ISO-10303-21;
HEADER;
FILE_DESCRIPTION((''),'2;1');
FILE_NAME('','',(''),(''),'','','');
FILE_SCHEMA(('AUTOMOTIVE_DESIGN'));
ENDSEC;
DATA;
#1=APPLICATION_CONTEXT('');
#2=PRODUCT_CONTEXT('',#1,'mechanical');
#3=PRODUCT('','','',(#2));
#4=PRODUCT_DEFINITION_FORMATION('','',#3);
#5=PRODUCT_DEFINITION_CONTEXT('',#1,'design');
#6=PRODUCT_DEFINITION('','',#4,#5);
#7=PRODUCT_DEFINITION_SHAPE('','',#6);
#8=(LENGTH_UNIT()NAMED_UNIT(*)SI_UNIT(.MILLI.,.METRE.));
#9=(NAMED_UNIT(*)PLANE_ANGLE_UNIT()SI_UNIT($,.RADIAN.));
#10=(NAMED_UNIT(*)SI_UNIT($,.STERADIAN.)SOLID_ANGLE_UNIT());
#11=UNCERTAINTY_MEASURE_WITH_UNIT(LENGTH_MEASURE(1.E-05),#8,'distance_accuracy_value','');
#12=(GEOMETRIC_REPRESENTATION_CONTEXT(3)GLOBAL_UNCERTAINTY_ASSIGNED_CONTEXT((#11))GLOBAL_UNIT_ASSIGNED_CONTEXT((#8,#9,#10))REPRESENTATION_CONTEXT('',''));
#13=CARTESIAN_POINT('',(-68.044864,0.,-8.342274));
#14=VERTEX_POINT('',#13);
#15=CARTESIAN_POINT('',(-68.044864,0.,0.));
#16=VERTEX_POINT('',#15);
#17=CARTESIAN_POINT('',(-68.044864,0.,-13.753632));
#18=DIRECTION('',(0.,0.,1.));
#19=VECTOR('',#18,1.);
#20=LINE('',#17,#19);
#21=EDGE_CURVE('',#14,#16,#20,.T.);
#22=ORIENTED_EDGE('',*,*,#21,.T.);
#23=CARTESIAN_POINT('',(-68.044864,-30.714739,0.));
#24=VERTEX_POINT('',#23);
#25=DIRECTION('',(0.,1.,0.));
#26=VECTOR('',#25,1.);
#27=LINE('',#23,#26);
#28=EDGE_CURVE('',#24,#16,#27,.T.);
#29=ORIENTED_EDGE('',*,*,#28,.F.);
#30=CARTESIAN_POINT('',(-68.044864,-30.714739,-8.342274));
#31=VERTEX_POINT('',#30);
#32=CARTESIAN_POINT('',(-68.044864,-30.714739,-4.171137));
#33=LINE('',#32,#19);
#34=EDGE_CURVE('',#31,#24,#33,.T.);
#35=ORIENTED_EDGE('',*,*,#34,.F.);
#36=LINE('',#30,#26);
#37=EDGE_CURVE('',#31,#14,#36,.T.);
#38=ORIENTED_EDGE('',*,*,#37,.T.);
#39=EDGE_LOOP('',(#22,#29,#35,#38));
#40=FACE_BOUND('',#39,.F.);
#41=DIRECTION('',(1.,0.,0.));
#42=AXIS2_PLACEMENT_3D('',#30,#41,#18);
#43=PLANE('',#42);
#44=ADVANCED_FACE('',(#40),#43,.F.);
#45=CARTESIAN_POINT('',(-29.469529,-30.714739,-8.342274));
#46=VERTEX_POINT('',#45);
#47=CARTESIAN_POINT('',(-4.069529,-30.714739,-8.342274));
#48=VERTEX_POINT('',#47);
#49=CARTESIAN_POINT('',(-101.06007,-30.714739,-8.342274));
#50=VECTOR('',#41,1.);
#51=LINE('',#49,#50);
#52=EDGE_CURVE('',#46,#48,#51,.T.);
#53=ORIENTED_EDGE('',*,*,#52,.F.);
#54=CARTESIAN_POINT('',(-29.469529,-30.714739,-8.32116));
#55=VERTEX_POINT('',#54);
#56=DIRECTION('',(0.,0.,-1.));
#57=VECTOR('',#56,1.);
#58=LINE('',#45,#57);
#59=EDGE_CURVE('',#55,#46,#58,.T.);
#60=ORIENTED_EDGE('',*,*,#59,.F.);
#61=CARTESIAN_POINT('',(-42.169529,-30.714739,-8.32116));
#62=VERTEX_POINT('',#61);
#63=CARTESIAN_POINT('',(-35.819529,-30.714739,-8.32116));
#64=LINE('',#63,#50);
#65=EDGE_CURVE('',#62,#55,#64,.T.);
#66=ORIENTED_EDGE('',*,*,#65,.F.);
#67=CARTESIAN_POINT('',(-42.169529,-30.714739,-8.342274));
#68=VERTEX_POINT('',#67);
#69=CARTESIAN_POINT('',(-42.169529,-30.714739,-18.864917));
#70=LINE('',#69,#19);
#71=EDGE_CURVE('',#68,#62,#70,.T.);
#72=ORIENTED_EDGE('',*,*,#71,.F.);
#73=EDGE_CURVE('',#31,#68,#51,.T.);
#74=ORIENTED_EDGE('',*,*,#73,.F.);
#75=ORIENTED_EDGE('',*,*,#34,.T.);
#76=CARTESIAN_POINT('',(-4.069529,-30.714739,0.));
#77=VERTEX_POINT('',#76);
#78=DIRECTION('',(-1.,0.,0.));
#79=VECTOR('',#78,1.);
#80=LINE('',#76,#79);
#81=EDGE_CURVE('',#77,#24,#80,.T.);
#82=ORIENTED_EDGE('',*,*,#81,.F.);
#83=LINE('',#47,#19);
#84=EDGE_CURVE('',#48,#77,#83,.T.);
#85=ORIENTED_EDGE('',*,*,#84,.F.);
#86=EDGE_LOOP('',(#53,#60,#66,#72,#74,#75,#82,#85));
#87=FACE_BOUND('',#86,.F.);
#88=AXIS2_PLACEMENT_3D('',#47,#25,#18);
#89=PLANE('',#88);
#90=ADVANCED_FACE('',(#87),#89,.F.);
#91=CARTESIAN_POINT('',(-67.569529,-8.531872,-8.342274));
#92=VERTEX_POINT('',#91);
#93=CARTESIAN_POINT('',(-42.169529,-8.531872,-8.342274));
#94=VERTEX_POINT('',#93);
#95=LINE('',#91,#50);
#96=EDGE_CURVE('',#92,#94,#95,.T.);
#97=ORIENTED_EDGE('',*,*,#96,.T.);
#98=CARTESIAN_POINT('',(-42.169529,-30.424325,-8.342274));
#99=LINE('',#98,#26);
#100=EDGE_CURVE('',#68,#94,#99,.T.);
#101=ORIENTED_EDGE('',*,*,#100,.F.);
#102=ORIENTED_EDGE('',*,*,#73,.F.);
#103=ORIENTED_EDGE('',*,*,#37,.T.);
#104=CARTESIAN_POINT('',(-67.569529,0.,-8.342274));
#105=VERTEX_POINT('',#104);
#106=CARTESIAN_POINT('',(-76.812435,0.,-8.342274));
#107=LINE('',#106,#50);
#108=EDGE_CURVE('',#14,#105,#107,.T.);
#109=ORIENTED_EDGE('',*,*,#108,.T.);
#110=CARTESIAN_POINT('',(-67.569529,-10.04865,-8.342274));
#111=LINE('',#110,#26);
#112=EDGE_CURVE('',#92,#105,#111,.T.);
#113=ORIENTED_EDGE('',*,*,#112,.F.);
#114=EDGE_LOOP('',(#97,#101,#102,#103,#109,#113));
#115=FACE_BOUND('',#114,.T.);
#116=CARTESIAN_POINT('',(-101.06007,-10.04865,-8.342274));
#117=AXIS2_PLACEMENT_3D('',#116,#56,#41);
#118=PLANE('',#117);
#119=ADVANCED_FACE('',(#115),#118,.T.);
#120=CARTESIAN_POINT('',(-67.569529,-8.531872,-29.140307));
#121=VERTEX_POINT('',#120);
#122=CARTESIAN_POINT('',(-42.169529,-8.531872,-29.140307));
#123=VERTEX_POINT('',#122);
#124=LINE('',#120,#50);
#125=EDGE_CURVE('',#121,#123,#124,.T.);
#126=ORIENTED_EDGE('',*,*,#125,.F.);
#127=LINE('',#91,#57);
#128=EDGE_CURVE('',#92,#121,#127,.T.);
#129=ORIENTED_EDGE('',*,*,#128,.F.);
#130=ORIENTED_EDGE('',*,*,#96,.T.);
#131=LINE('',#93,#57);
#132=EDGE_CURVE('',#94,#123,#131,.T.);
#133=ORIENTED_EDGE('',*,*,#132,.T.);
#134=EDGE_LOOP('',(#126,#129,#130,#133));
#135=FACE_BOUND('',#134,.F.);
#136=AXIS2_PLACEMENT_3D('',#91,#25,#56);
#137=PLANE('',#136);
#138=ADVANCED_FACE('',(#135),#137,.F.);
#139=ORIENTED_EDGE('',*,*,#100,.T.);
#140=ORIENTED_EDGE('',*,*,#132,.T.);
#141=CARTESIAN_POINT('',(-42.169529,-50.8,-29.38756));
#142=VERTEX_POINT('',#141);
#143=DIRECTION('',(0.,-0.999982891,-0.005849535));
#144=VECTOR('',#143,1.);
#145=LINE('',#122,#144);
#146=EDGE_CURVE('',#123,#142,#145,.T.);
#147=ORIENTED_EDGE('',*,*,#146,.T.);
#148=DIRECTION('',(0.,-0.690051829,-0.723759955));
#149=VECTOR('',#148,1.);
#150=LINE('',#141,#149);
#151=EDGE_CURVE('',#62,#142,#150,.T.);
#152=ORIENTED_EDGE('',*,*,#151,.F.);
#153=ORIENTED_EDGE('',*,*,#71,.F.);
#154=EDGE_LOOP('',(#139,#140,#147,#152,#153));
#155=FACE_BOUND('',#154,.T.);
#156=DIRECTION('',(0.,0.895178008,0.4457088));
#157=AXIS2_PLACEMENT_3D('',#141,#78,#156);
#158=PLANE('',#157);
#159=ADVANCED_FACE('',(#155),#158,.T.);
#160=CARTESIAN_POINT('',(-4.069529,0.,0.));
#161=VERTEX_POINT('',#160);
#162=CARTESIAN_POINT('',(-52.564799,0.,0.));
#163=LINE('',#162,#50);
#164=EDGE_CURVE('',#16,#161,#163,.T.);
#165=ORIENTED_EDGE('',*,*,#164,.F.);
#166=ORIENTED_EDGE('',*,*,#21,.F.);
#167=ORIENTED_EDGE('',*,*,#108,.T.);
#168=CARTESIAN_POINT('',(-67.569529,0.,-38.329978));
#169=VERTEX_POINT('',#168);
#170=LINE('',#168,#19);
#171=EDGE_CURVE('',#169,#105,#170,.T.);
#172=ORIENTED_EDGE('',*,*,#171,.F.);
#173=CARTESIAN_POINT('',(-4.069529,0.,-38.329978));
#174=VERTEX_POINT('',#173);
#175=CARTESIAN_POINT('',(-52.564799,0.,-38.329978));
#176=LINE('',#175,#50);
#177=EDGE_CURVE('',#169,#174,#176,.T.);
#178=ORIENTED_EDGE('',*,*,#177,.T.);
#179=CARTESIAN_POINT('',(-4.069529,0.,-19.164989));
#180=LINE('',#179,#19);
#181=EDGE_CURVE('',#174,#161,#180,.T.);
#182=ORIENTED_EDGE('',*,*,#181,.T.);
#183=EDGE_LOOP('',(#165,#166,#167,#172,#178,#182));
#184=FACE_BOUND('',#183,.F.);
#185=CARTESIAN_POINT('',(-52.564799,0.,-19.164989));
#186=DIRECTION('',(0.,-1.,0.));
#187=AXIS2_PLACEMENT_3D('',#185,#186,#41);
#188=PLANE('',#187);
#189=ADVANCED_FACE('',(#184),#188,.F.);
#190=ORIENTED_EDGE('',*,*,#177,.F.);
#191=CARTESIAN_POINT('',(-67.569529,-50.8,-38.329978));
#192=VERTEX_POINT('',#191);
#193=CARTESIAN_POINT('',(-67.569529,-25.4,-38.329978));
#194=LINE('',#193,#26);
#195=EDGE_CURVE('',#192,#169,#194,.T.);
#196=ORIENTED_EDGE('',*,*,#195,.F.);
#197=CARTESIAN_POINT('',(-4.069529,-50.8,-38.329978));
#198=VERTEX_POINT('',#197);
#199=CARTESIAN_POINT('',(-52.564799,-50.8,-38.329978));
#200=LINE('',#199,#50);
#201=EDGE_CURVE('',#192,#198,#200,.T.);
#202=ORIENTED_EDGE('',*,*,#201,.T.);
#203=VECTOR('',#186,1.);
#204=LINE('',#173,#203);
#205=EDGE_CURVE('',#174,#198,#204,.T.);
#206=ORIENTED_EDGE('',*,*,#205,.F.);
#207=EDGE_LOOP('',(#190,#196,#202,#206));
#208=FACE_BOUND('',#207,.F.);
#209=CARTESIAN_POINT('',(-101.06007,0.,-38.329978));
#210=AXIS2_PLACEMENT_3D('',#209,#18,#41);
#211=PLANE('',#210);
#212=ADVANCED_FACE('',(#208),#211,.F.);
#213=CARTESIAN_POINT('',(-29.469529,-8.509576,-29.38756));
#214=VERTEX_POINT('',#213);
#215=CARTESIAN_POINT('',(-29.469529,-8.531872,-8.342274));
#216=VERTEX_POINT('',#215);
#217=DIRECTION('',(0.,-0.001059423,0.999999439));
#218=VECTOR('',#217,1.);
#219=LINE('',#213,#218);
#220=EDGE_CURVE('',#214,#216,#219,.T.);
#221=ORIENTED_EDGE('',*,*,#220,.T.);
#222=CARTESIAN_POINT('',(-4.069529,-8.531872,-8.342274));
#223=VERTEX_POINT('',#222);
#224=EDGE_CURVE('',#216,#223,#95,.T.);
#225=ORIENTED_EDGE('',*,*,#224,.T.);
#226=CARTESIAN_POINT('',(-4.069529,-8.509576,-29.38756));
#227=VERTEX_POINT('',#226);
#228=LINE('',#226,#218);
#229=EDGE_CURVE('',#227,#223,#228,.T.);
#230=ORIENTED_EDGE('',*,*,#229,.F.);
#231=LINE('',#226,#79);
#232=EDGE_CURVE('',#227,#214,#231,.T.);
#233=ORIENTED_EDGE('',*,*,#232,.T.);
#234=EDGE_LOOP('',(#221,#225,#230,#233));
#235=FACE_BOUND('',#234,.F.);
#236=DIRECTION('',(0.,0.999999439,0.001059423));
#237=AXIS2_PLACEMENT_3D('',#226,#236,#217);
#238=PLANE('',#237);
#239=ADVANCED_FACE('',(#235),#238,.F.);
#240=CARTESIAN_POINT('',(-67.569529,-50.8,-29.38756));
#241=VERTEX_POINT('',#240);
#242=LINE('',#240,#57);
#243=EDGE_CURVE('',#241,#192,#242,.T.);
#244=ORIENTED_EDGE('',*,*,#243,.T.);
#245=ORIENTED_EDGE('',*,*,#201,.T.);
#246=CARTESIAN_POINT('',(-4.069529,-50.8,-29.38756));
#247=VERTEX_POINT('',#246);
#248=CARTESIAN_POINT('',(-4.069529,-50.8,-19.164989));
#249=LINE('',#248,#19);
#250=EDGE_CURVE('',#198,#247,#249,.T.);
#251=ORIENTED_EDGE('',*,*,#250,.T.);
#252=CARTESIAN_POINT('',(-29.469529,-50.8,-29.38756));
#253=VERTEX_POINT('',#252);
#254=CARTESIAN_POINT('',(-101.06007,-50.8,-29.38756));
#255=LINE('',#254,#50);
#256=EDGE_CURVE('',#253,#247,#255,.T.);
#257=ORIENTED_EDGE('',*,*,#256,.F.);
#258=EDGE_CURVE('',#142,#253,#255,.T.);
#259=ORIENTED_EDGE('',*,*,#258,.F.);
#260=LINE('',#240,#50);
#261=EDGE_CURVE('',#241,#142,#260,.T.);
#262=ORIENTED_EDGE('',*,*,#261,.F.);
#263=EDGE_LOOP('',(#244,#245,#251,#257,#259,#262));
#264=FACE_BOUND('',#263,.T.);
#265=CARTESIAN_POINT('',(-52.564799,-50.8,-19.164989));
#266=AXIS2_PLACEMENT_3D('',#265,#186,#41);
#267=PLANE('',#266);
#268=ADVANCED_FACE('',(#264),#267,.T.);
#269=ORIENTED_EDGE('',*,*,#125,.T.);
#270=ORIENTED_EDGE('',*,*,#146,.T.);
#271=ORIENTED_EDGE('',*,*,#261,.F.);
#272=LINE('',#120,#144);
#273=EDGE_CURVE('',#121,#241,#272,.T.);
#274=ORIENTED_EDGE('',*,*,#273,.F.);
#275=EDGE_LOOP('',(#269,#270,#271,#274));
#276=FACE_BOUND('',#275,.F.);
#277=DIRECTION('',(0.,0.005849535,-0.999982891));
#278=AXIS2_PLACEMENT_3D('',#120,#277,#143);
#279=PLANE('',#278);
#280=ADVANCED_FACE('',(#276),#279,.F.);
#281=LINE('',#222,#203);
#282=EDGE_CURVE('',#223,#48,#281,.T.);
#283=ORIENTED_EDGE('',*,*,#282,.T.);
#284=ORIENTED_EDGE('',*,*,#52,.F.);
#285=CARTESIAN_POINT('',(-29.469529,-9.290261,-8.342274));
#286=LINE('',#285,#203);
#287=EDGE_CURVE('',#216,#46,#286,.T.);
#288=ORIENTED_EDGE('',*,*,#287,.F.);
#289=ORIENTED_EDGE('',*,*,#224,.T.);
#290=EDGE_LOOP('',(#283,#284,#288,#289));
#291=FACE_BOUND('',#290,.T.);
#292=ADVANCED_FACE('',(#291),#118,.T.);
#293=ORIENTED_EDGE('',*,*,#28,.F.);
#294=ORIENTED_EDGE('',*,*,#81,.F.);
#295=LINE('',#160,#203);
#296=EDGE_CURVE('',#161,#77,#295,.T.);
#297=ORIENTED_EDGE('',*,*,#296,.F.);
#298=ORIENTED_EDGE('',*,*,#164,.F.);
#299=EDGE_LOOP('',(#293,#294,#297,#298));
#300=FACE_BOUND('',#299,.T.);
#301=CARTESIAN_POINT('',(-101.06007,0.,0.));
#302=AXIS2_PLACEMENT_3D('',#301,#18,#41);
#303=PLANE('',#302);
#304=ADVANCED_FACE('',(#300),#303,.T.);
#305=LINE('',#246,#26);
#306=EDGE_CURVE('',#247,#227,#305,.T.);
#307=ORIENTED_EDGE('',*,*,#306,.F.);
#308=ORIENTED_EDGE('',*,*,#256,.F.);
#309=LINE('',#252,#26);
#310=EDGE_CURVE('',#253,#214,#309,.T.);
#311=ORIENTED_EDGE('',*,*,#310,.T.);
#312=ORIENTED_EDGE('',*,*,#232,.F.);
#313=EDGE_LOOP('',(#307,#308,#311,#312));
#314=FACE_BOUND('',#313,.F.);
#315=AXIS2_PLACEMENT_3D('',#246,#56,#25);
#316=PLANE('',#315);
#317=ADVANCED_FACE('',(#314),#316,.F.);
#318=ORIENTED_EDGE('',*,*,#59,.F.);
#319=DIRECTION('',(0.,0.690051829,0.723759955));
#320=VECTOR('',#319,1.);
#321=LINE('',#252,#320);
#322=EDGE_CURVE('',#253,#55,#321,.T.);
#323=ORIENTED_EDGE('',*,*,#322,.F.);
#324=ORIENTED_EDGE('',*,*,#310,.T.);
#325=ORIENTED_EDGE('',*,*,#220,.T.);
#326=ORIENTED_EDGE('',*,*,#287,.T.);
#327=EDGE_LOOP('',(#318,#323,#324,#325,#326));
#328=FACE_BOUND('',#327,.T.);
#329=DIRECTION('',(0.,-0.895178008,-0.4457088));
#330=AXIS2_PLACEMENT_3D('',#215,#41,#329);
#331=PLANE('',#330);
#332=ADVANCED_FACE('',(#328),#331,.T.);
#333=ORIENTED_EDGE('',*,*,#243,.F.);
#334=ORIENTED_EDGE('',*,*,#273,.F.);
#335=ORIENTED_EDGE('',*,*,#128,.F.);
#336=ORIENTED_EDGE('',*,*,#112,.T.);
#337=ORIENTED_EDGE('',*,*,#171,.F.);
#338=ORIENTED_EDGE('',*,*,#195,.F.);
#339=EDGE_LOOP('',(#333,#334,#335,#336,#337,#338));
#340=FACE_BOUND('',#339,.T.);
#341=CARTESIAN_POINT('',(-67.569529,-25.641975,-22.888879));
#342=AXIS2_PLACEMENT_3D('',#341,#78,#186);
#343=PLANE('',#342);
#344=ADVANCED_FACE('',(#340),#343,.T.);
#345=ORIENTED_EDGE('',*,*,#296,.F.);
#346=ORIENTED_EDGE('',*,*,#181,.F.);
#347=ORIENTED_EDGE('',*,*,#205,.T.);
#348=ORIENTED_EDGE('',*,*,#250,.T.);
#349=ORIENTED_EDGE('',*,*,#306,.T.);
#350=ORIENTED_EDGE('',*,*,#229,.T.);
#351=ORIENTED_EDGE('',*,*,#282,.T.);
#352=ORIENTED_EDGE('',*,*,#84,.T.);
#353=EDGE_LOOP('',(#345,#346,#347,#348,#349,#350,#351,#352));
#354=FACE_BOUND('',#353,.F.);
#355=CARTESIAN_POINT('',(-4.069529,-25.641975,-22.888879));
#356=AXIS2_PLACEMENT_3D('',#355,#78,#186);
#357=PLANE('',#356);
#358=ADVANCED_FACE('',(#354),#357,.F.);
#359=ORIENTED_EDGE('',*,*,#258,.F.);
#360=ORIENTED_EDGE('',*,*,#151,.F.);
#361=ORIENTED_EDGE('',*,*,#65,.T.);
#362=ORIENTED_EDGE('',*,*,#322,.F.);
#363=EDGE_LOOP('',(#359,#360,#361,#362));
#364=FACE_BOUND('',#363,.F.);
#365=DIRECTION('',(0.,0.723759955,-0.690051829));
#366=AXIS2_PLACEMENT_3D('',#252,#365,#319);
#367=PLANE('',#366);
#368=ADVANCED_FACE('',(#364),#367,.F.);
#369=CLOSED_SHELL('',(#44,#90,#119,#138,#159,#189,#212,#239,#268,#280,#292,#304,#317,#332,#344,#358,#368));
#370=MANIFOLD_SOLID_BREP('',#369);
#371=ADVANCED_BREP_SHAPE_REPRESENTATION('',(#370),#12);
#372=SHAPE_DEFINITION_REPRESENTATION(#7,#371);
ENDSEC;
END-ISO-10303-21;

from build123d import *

# Parameters (mm, degrees)
F0_W      = 96.990541555
F0_H      = 38.3299775422
F1_DEPTH  = 50.8
F3_DEPTH  = 101.6
F5_DEPTH  = 25.4
F7_DEPTH  = 38.1
F8_DEPTH  = 38.1
F9_W      = 33.0152064562
F9_H      = 8.3422744647
F10_DEPTH = 47.752
F11_DEPTH = 25.4
F13_DEPTH = 25.4
F15_DEPTH = 63.5
F17_DEPTH = 25.4
F19_DEPTH = 25.4
F20_DEPTH = 9.906
F22_DEPTH = 25.4


# Not quite as in the source:
# - a feature of the source that left no trace in its solid (it failed there, or was rolled back) is left out


with BuildPart() as f1:
    # F0 (on Front) → F1 (new body)
    with BuildSketch(Plane.XZ):
        with Locations((-52.56479932, -19.1649887711)):
            Rectangle(F0_W, F0_H)
    extrude(amount=F1_DEPTH)

    # F2 (on face) → F3 (cut)
    with BuildSketch(Plane.YZ.offset(-4.0695285425)):
        Polygon((-50.8, 0), (-50.8, -29.3875597417), (-30.714739114, -8.3422744647), (-30.714739114, 0), align=None)
    extrude(amount=-F3_DEPTH, mode=Mode.SUBTRACT)

    # F4 (on face) → F5 (cut)
    with BuildSketch(Plane.YZ.offset(-4.0695285425)):
        Polygon((-8.5318721831, -8.3422744647), (-30.714739114, -8.3422744647), (-50.8, -29.3875597417), (-8.5318721831, -29.3875597417), align=None)
    extrude(amount=-F5_DEPTH, mode=Mode.SUBTRACT)

    # F6 (on face) → F7 (cut)
    with BuildSketch(Plane(origin=(-101.0600700974, 0, 0), x_dir=(0, -1, 0), z_dir=(-1, 0, 0))):
        Polygon((50.8, -29.3875597417), (30.714739114, -8.3422744647), (10.0486502051, -8.3422744647), (10.0486502051, -29.3875597417), align=None)
    extrude(amount=-F7_DEPTH, mode=Mode.SUBTRACT)

    # F8 (cut): a face of the model
    f8_faces = [f1.faces().sort_by_distance(p)[0] for p in [
        (-29.4695285425, -25.1662286777, -19.9579957719),
    ]]
    extrude(f8_faces, amount=-F8_DEPTH, mode=Mode.SUBTRACT)

    # F9 (on face) → F10 (cut)
    with BuildSketch(Plane.XZ.offset(30.714739114)):
        with Locations((-84.5524668694, -4.1711372323)):
            Rectangle(F9_W, F9_H)
    extrude(amount=-F10_DEPTH, mode=Mode.SUBTRACT)

    # F11 (cut): a face of the model
    f11_faces = [f1.faces().sort_by_distance(p)[0] for p in [
        (-84.31479932, -10.0486502051, -18.8649171032),
    ]]
    extrude(f11_faces, amount=-F11_DEPTH, mode=Mode.SUBTRACT)

    # F12 (on face) → F13 (cut)
    with BuildSketch(Plane.XY.offset(-29.3875597417)):
        Polygon((-67.5695285425, -50.8), (-67.5695285425, -8.5318721831), (-67.5695285425, 0), (-101.0600700974, 0), (-101.0600700974, -50.8), align=None)
    extrude(amount=-F13_DEPTH, mode=Mode.SUBTRACT)

    # F14 (on face) → F15 (join)
    with BuildSketch(Plane(origin=(-67.5695285425, 0, 0), x_dir=(0, -1, 0), z_dir=(-1, 0, 0))):
        Polygon((50.8, -29.3875597417), (8.5318721831, -8.3422744647), (8.5318721831, -29.3875597417), align=None)
    extrude(amount=-F15_DEPTH)

    # F16 (on face) → F17 (cut)
    with BuildSketch(Plane.YZ.offset(-4.0695285425)):
        Polygon((-8.5318721831, -8.3422744647), (-50.8, -29.3875597417), (-8.5095763206, -29.3875597417), align=None)
    extrude(amount=-F17_DEPTH, mode=Mode.SUBTRACT)

    # F18 (on face) → F19 (cut)
    with BuildSketch(Plane(origin=(-67.5695285425, 0, 0), x_dir=(0, -1, 0), z_dir=(-1, 0, 0))):
        Polygon((50.8, -29.3875597417), (8.5318721831, -8.3422744647), (8.5318721831, -29.1403066367), align=None)
    extrude(amount=-F19_DEPTH, mode=Mode.SUBTRACT)

    # F20 (add): a face of the model
    f20_faces = [f1.faces().sort_by_distance(p)[0] for p in [
        (-35.8195285425, -29.6659360915, -18.8649171032),
    ]]
    extrude(f20_faces, amount=F20_DEPTH)

    # F21 (on face) → F22 (cut)
    with BuildSketch(Plane.YZ.offset(-29.4695285425)):
        Polygon((-55.2151913765, -20.5199263986), (-50.8, -29.3875597417), (-30.714739114, -8.3211602381), align=None)
        Polygon((-12.9470635596, 0.5253588785), (-14.0022137243, 0), (-12.6854875674, 0), align=None)
    extrude(amount=-F22_DEPTH, mode=Mode.SUBTRACT)


solid = f1.part
